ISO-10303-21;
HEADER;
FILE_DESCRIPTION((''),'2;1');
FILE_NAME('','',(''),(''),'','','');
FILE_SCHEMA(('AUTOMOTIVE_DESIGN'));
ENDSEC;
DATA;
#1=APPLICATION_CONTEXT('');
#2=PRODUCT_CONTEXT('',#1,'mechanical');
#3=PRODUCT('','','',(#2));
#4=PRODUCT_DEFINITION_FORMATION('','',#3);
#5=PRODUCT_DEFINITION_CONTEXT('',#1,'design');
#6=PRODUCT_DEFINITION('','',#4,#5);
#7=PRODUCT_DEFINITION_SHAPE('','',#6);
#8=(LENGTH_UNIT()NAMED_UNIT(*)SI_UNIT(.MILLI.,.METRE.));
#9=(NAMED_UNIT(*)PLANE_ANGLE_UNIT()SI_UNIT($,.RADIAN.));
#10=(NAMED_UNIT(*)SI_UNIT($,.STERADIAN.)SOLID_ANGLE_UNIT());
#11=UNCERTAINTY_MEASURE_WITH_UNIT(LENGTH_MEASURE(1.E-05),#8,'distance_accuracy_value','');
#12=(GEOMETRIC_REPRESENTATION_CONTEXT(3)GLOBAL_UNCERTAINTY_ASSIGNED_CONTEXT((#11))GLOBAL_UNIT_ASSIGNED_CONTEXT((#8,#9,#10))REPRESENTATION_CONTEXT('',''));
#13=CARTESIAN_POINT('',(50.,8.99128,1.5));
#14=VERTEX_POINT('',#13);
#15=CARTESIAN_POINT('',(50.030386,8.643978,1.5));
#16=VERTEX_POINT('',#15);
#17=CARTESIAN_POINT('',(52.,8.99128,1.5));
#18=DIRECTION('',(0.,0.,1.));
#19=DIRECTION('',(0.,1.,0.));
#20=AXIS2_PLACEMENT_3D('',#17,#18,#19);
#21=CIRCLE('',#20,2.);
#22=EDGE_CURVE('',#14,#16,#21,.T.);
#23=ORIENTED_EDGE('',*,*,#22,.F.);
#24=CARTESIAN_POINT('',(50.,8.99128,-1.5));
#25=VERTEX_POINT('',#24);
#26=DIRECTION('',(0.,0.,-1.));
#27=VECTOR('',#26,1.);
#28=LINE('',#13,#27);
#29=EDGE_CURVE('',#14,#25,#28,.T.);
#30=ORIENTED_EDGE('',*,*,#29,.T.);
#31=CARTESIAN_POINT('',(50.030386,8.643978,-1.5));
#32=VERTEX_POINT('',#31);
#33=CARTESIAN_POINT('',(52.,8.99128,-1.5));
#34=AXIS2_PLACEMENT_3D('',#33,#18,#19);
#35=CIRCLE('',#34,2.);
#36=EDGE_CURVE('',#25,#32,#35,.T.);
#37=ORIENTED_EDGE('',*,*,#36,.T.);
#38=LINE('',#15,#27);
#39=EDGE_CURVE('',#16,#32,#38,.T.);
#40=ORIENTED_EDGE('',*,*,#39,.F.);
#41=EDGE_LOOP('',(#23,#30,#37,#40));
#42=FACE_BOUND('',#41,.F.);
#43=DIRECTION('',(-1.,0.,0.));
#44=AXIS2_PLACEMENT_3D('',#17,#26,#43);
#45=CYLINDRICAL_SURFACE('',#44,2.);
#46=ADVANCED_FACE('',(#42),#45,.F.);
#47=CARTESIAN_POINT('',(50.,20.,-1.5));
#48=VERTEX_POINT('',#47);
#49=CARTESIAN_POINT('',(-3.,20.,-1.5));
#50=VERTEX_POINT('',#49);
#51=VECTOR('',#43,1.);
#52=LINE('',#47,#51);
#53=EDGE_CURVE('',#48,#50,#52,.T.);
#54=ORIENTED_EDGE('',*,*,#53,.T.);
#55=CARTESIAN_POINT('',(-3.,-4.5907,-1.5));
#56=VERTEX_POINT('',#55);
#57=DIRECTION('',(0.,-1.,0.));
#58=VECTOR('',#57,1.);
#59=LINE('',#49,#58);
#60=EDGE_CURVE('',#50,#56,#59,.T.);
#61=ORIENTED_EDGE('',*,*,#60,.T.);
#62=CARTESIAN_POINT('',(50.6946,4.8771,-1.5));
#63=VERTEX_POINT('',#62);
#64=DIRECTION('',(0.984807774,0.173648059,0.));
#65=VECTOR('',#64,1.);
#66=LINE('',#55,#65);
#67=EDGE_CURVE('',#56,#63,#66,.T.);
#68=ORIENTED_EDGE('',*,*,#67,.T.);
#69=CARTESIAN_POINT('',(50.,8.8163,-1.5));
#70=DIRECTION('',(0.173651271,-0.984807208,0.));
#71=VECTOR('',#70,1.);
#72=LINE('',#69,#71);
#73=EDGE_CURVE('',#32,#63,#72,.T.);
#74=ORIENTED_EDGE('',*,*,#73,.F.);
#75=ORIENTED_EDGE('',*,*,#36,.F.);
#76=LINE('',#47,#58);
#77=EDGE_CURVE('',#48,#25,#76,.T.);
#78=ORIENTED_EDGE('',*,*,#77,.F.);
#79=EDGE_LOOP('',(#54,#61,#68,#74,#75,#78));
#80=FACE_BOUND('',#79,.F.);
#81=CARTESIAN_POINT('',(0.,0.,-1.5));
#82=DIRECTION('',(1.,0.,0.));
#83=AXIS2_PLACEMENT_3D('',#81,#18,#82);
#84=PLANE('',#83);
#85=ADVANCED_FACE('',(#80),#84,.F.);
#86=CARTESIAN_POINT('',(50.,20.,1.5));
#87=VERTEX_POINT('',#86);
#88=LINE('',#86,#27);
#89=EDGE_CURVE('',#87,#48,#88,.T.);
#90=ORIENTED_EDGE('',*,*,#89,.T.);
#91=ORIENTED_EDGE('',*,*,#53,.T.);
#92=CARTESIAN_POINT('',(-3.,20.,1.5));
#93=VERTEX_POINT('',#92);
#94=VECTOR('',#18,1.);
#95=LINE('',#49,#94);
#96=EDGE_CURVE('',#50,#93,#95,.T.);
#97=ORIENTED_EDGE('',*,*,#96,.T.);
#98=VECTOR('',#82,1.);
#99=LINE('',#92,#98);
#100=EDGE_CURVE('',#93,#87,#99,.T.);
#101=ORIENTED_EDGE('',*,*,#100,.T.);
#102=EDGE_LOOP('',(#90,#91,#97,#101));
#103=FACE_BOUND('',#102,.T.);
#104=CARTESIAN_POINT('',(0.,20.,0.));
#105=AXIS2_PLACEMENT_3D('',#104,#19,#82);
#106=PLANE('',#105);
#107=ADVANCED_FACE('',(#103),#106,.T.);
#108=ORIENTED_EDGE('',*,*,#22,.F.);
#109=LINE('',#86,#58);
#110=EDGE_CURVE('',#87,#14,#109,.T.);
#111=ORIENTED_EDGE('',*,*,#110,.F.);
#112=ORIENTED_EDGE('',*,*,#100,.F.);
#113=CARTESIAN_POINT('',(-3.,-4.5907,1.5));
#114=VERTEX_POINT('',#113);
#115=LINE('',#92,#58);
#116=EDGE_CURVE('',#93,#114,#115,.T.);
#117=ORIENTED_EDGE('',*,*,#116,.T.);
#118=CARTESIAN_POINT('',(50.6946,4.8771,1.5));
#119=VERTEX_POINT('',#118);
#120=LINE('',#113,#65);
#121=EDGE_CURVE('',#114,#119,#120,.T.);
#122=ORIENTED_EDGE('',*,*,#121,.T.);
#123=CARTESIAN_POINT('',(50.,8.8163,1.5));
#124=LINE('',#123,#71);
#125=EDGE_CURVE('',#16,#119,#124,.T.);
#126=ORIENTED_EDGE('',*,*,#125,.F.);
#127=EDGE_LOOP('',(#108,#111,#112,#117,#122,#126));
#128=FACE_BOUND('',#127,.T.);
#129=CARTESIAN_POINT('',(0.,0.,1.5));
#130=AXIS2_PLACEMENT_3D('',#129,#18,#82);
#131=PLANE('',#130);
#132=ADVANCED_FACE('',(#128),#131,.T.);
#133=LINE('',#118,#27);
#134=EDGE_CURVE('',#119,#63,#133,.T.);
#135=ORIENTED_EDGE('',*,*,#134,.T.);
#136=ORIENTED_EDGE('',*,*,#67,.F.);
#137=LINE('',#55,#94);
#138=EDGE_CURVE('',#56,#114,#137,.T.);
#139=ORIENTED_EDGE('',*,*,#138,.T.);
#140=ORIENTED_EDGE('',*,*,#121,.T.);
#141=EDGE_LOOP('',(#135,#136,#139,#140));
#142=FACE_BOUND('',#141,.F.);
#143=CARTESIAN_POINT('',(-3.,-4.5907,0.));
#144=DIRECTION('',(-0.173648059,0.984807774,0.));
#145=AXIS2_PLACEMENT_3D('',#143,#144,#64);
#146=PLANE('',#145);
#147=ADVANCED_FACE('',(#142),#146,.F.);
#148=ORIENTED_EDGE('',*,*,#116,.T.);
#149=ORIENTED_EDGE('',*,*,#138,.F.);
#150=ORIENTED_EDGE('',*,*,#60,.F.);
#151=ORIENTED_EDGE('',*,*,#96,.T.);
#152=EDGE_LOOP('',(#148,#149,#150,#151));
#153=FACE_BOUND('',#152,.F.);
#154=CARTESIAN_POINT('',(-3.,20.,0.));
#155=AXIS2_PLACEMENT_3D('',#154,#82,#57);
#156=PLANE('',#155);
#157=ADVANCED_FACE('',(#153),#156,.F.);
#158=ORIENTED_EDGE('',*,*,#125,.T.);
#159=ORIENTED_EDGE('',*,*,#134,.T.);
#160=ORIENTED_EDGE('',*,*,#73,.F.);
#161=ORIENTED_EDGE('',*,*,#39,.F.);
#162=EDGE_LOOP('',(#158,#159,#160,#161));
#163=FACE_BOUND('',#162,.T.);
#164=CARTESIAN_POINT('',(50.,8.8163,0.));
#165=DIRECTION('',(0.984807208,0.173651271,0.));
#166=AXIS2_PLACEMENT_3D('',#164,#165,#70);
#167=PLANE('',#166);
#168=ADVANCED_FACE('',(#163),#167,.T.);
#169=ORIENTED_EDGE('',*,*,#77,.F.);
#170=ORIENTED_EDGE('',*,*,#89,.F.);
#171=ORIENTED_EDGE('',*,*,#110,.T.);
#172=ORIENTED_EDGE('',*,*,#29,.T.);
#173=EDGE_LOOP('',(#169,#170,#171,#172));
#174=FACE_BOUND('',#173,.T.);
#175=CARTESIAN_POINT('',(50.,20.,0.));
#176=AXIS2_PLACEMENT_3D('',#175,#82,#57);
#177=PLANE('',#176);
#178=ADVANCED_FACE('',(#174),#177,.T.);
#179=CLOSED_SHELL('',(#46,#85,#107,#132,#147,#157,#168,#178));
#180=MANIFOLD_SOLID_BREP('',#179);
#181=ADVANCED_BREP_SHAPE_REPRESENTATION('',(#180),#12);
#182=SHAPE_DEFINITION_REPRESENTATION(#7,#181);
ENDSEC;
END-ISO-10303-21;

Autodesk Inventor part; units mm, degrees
ref_plane "YZ Plane" through (0, 0, 0) normal (1, 0, 0) x (0, 1, 0)
ref_plane "XZ Plane" through (0, 0, 0) normal (0, 1, 0) x (-1, 0, 0)
ref_plane "XY Plane" through (0, 0, 0) normal (0, 0, 1) x (1, 0, 0)
sketch "Sketch1" plane through (0, 0, 0) normal (0, 0, 1) x (1, 0, 0)
  line L0 (0, 20) -> (0, 0)
  line L1 (0, 0) -> (50, 8.8163)
  line L2 (0, 20) -> (-3, 20)
  line L3 (-3, 20) -> (-3, -4.5907)
  line L4 (-3, -4.5907) -> (50.6946, 4.8771)
  line L5 (0, 0) -> (50.6946, 0) construction
  line L6 (50, 8.8163) -> (50.6946, 4.8771)
  line L7 (0, 20) -> (50, 20)
  line L8 (50, 20) -> (50, 8.8163)
  line L9 (50.3473, 6.8467) -> (11.5175, 0) construction
  dimension "d0" = 20
  dimension "d1" = 3
  dimension "d2" = 10
  dimension "d3" = 4
  dimension "d4" = 50
extrude "Plate1" add sketch "Sketch1" along normal mid plane 3
fillet "Corner Round1" radius 2 1 edges at (50, 8.8163, 0)
equation "\"d5\" = Thickness"
equation "\"BendRadius\" = Thickness"
equation "\"BendReliefWidth\" = Thickness"
equation "\"BendReliefDepth\" = 0.5 * Thickness"
equation "\"CornerReliefSize\" = 4 * Thickness"
equation "\"MinimumRemnant\" = 2 * Thickness"
equation "\"TransitionRadius\" = BendRadius"
equation "\"JacobiRadiusSize\" = BendRadius"
equation "\"GapSize\" = Thickness"
equation "\"Thickness\" = 3"
properties part number "Ramp Side Wall"
